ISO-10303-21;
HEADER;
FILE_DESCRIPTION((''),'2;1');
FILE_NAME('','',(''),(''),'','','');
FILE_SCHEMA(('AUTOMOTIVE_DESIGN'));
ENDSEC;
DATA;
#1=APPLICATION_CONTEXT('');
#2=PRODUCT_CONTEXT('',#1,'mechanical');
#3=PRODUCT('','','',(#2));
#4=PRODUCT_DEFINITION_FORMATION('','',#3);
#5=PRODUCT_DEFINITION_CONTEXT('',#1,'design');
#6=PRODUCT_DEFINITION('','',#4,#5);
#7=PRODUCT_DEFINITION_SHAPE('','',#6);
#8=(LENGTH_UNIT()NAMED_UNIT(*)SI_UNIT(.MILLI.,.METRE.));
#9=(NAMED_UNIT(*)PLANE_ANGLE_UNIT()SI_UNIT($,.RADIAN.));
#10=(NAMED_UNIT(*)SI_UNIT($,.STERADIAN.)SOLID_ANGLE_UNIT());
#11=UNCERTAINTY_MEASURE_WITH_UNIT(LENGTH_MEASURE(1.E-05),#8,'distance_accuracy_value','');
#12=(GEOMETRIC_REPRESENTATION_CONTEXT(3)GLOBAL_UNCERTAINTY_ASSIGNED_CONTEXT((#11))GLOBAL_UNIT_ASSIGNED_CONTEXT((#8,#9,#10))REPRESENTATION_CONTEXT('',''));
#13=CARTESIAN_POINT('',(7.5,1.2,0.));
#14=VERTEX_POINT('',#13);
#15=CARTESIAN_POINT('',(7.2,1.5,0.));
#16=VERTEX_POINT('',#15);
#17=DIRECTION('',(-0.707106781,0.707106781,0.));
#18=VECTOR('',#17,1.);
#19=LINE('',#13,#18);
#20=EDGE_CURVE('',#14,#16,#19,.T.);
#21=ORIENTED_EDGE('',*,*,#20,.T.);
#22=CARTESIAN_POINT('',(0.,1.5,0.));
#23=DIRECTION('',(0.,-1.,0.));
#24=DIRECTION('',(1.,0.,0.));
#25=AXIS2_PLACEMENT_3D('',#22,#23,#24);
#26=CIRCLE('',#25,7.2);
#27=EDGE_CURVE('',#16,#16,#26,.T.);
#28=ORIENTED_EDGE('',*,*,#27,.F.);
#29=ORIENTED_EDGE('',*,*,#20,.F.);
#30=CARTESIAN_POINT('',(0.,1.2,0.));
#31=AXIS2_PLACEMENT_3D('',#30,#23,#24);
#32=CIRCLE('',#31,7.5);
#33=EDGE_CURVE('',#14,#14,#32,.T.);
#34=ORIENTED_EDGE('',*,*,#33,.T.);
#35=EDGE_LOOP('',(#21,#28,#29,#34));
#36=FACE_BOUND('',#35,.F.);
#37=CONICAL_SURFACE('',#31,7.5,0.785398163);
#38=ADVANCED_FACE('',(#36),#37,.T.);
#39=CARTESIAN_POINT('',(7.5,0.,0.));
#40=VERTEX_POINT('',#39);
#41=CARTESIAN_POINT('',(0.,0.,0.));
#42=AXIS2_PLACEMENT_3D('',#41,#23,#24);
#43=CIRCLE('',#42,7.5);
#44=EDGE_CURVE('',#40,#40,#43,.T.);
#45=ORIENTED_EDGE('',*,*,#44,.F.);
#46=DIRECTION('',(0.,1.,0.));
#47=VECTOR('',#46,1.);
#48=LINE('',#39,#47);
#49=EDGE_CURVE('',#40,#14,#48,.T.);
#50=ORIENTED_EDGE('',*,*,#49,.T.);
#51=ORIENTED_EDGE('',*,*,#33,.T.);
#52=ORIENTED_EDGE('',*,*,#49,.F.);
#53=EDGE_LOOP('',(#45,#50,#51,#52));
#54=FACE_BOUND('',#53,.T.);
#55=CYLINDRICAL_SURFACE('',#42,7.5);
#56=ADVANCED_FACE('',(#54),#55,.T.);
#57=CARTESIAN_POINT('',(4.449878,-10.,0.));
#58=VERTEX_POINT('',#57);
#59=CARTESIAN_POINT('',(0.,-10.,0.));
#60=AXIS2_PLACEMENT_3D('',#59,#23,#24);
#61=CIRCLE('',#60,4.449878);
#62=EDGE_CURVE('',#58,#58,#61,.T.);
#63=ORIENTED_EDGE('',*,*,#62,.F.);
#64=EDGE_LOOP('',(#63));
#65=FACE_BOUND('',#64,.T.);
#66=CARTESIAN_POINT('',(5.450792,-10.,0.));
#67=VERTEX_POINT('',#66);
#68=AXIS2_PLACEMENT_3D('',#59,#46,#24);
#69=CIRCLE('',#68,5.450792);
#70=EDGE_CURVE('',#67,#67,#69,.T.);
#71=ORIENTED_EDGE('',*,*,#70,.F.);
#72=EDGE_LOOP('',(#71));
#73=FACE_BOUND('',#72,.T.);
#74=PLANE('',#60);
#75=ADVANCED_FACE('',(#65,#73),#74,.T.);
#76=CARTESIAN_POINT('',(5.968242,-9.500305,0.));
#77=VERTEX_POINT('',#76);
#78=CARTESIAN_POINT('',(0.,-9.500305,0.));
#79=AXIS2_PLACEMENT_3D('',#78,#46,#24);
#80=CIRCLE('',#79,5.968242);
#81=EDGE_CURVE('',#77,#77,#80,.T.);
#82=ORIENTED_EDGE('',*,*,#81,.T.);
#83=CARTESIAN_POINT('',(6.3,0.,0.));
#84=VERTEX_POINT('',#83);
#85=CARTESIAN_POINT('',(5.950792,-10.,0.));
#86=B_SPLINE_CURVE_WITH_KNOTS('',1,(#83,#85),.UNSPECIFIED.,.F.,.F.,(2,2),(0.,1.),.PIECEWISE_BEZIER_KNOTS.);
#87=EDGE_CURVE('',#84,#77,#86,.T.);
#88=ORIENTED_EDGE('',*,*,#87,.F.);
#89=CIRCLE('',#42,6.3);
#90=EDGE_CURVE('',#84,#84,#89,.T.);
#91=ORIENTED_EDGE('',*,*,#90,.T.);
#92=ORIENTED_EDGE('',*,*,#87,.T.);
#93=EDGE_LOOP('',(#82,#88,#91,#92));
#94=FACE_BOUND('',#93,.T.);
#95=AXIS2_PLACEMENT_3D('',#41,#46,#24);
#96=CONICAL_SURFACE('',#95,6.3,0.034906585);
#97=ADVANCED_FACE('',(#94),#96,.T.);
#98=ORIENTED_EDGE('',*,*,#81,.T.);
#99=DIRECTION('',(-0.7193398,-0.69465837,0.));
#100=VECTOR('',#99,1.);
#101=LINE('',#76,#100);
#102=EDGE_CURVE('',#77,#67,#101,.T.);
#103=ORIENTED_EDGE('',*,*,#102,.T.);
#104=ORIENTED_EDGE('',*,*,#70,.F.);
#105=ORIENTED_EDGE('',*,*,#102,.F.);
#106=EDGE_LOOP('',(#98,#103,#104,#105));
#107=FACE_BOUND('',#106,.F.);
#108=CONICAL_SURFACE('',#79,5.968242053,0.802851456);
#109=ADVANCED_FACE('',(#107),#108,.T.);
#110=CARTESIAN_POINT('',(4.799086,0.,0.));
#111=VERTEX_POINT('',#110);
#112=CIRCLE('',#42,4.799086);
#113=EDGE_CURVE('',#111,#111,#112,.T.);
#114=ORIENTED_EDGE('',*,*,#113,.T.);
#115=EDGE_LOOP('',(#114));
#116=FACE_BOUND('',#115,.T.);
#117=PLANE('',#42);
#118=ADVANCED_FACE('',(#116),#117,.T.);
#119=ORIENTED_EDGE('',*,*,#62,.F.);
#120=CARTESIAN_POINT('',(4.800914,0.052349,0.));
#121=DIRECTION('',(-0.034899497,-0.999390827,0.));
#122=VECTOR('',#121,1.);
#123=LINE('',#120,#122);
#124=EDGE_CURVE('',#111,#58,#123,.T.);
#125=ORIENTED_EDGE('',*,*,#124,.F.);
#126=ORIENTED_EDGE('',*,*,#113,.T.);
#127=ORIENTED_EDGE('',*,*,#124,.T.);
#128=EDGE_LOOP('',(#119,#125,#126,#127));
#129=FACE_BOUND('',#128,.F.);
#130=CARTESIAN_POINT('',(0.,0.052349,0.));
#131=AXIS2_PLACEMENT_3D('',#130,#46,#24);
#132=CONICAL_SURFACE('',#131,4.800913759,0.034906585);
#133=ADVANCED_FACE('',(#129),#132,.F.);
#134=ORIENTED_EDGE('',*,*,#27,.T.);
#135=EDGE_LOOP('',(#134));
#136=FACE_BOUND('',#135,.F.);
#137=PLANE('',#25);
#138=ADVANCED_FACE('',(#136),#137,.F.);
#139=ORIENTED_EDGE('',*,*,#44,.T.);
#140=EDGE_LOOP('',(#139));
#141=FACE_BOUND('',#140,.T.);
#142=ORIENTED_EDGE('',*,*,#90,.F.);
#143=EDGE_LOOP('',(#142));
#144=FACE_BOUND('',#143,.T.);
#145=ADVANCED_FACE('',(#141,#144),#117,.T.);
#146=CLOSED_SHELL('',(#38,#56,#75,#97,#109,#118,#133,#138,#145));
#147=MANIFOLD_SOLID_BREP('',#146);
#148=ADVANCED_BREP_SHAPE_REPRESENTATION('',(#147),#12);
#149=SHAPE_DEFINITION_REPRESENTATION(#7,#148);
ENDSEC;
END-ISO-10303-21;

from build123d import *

# Parameters (mm, degrees)
F0_R      = 6.3
F1_DEPTH  = 10
F1_TAPER  = 2
F0_R_2    = 7.5
F1_FACE_R = 6.3
F2_DEPTH  = 1.5
F3_SIZE   = 0.3
F4_T      = -1.5


# Not quite as in the source:
# - a fillet or chamfer that OpenCascade refuses, or shapes differently, is made with other operations: its cross-section is extruded or revolved along the edge and cut away or added


with BuildPart() as f1:
    # F0 (on Front) → F1 (new body)
    with BuildSketch(Plane.XZ):
        Circle(F0_R)
    extrude(amount=F1_DEPTH, taper=F1_TAPER)

    # F0 (on Front) + F1_face (on face) → F2 (join)
    with BuildSketch(Plane.XZ):
        Circle(F0_R_2)
        Circle(F0_R, mode=Mode.SUBTRACT)
    with BuildSketch(Plane(origin=(0, 0, 0), x_dir=(1, 0, 0), z_dir=(0, 1, 0))):
        Circle(F1_FACE_R)
    extrude(amount=-F2_DEPTH, dir=(0, -1, 0))

    # F3
    f3_edges = [f1.edges().sort_by_distance(p)[0] for p in [
        (-7.5, 1.5, 0),
    ]]
    chamfer(f3_edges, length=F3_SIZE)

    # F4
    f4_openings = [f1.faces().sort_by_distance(p)[0] for p in [
        (0, -10, 0),
    ]]
    offset(amount=F4_T, openings=f4_openings, kind=Kind.INTERSECTION)

    # F5: chamfer of 0.5 on 1 edges, made by hand

    # F5_s1 → F5_t2 (revolve, cut)
    with BuildSketch(Plane.XY):
        Polygon((5.9682420534, -9.5003045865), (5.4507923051, -10), (5.9507923051, -10), align=None)
    revolve(axis=Axis((0, -10, 0), (0, 1, 0)), mode=Mode.SUBTRACT)


solid = f1.part
